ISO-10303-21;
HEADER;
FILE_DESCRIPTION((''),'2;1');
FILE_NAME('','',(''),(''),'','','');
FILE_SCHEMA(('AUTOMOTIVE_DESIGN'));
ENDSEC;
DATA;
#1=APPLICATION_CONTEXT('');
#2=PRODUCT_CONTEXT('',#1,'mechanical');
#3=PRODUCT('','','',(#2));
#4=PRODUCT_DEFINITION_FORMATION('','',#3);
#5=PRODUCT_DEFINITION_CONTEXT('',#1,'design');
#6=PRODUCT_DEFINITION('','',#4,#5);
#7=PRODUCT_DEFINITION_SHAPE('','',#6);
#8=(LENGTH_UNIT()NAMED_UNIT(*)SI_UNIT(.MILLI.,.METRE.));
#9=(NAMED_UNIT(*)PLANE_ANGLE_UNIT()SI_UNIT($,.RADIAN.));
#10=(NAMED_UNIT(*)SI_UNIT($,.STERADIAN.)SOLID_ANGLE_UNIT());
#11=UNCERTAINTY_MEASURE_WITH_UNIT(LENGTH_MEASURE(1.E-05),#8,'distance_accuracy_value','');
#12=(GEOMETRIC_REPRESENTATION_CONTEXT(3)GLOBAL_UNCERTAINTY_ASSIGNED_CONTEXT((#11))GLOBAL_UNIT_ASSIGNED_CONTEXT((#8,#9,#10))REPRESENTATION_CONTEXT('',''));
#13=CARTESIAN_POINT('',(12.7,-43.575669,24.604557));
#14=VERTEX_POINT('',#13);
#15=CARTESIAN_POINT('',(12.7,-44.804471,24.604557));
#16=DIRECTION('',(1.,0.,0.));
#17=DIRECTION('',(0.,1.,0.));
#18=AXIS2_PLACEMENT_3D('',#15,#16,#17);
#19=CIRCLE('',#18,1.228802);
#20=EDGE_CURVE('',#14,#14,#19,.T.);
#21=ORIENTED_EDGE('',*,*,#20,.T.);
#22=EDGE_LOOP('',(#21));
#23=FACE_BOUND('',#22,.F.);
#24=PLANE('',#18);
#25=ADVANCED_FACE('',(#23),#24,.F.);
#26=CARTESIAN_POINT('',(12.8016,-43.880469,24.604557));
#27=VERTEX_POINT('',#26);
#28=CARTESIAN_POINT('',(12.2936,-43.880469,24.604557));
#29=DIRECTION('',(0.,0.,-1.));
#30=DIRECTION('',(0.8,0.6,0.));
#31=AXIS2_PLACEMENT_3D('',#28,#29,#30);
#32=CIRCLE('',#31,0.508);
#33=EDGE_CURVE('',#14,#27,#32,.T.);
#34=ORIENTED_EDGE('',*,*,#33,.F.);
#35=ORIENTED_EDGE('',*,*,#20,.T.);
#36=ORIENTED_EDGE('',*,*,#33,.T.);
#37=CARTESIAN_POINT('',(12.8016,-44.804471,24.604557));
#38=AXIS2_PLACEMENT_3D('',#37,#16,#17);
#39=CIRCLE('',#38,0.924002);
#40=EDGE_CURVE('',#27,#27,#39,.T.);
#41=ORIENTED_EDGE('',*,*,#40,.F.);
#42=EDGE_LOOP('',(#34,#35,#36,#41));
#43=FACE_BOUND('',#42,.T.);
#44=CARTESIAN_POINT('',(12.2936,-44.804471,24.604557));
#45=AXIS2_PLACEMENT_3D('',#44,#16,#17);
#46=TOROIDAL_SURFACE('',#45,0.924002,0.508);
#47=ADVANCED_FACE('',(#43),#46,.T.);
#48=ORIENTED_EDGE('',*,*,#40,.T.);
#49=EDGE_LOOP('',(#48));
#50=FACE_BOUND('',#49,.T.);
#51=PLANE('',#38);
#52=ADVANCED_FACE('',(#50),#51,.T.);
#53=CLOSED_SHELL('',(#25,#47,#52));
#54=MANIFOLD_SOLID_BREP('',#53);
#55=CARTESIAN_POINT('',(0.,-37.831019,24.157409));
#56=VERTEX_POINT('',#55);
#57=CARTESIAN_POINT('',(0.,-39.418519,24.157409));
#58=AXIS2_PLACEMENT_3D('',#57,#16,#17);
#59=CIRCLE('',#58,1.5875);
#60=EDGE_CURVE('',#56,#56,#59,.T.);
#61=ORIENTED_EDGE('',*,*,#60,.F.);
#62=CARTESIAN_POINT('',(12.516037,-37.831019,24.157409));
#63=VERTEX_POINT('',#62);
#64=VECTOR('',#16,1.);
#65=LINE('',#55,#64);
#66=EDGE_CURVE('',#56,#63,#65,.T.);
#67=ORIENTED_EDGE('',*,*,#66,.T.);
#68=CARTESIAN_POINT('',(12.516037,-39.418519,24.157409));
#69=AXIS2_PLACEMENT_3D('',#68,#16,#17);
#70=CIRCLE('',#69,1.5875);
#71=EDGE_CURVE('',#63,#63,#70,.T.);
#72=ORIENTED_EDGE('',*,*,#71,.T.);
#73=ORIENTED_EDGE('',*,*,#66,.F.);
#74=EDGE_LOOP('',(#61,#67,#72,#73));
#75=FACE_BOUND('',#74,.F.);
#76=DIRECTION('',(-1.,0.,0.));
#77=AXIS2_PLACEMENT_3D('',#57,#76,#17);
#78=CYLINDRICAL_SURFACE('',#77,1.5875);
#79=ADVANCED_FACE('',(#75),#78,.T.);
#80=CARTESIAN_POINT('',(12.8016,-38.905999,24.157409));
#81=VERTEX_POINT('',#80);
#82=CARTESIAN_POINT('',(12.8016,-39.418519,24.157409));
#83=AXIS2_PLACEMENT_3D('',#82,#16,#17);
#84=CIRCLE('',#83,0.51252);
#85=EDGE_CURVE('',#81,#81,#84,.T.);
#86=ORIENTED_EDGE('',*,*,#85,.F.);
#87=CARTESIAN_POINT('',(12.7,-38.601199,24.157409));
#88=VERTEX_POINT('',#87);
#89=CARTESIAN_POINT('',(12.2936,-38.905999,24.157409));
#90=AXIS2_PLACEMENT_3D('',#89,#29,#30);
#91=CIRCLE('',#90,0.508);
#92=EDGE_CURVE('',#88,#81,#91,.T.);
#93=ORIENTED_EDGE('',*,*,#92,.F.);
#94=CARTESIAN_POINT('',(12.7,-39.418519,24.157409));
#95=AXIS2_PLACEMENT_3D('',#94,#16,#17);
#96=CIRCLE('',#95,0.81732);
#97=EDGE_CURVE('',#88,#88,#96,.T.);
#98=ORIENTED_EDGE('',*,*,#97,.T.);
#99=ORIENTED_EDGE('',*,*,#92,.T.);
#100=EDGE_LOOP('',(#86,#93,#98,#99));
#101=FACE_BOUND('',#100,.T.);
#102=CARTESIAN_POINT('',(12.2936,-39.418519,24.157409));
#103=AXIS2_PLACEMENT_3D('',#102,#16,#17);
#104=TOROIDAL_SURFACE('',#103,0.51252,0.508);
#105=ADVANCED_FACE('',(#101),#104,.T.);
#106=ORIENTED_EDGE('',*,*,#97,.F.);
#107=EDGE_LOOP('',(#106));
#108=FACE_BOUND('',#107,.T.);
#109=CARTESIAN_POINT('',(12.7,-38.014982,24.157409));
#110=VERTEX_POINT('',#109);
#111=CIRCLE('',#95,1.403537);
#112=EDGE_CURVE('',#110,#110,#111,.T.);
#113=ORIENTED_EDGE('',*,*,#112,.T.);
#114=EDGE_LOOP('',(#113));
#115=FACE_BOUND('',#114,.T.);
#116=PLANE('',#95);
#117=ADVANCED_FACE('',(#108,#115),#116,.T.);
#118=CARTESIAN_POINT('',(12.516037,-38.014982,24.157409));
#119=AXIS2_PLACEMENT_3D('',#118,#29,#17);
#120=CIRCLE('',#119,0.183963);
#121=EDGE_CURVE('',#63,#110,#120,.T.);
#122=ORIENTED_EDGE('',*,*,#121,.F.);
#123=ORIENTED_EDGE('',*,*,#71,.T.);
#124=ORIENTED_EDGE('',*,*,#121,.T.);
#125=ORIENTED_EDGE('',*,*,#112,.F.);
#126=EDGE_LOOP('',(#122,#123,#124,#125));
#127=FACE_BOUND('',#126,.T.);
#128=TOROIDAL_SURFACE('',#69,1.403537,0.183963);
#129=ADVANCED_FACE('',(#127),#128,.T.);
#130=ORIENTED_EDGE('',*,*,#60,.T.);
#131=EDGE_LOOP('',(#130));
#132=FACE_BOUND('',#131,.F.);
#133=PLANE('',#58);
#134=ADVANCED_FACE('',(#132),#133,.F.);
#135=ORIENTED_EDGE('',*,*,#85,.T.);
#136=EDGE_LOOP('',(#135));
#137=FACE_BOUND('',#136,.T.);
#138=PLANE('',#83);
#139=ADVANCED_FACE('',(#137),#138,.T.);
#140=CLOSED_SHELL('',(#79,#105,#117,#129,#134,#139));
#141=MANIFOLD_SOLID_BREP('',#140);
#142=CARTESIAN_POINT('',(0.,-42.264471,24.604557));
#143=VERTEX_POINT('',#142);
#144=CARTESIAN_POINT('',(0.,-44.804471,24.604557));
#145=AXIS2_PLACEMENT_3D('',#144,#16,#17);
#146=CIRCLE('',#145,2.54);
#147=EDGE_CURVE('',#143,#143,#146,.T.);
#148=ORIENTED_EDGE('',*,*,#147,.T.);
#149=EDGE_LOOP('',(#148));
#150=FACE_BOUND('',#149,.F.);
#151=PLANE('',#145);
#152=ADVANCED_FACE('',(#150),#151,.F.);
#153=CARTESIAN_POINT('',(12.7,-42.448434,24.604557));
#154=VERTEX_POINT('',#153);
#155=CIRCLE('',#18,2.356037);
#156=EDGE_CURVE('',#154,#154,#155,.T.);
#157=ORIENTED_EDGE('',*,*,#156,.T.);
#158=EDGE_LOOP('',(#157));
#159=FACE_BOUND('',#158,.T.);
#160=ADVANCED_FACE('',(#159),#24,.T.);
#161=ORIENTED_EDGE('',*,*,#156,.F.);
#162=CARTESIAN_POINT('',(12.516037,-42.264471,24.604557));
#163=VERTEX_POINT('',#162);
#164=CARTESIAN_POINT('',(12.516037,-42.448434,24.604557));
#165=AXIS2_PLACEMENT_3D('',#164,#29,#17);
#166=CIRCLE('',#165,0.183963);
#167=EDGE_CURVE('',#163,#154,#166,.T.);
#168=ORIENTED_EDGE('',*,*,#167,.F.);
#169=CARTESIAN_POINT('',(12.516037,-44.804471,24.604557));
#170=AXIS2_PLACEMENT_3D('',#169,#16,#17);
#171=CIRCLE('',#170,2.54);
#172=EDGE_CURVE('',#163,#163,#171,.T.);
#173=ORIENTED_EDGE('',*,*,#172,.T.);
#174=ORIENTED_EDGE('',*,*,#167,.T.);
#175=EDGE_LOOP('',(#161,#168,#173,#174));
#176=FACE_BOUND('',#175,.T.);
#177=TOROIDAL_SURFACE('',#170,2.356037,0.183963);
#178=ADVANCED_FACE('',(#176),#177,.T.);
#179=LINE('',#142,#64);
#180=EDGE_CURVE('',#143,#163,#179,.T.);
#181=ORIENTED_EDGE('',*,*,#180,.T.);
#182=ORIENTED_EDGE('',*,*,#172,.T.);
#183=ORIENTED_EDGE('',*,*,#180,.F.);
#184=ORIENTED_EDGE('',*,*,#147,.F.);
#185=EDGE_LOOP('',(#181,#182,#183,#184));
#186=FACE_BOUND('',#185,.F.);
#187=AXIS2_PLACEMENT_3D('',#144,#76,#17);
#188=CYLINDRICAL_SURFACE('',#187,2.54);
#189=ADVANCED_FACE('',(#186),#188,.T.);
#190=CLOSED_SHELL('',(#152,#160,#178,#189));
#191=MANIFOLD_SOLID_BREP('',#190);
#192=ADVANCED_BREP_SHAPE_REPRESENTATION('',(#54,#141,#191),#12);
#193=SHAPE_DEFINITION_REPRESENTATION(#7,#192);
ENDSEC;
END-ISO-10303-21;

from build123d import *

# Parameters (mm, degrees)
F0_R     = 2.54
F1_DEPTH = 12.7
F0_R_2   = 1.5875
F2_R     = 0.1839630735
F2_2_R   = 0.1839630735
F3_R     = 1.2288024755
F4_DEPTH = 0.1016
F5_R     = 0.8173198651
F6_DEPTH = 0.1016


# Not quite as in the source:
# - a fillet or chamfer that OpenCascade refuses, or shapes differently, is made with other operations: its cross-section is extruded or revolved along the edge and cut away or added
# - a feature names something its author has since deleted; it is built from what else it names


with BuildPart() as f1:
    # F0 (on Right) → F1 (new body)
    with BuildSketch(Plane.YZ):
        with Locations((-44.8044711261, 24.6045570821)):
            Circle(F0_R)
    extrude(amount=F1_DEPTH)

    # F2
    f2_edges = [f1.edges().sort_by_distance(p)[0] for p in [
        (12.7, -47.344471, 24.604557),
    ]]
    fillet(f2_edges, radius=F2_R)


with BuildPart() as f1b:
    # F0 (on Right) → F1, piece 2 (new body)
    with BuildSketch(Plane.YZ):
        with Locations((-39.4185185432, 24.1574086249)):
            Circle(F0_R_2)
    extrude(amount=F1_DEPTH)

    # F2#2
    f2_2_edges = [f1b.edges().sort_by_distance(p)[0] for p in [
        (12.7, -41.006019, 24.157409),
    ]]
    fillet(f2_2_edges, radius=F2_2_R)

    # F5 (on face) → F6 (join)
    with BuildSketch(Plane.YZ.offset(12.7)):
        with Locations((-39.4185185432, 24.1574086249)):
            Circle(F5_R)
    extrude(amount=F6_DEPTH)

    # F7: fillet of radius 0.508 on 1 edges, made by hand

    # F7_s1 → F7_t2 (revolve, cut)
    with BuildSketch(Plane.XY.offset(24.1574086249)):
        with BuildLine():
            ThreePointArc((12.7, -38.6011986781), (12.7755311154, -38.745354973), (12.8016, -38.9059986781))
            Line((12.8016, -38.9059986781), (12.8016, -38.6011986781))
            Line((12.8016, -38.6011986781), (12.7, -38.6011986781))
        make_face()
    revolve(axis=Axis((12.8016, -39.4185185432, 24.1574086249), (1, 0, 0)), mode=Mode.SUBTRACT)


with BuildPart() as f4:
    # F3 (on face) → F4 (new body)
    with BuildSketch(Plane.YZ.offset(12.7)):
        with Locations((-44.8044711261, 24.6045570821)):
            Circle(F3_R)
    extrude(amount=F4_DEPTH)

    # F7#2: fillet of radius 0.508 on 1 edges, made by hand

    # F7_2_s1 → F7_2_t2 (revolve, cut)
    with BuildSketch(Plane.XY.offset(24.6045570821)):
        with BuildLine():
            ThreePointArc((12.7, -43.5756686507), (12.7755311154, -43.7198249455), (12.8016, -43.8804686507))
            Line((12.8016, -43.8804686507), (12.8016, -43.5756686507))
            Line((12.8016, -43.5756686507), (12.7, -43.5756686507))
        make_face()
    revolve(axis=Axis((12.8016, -44.8044711261, 24.6045570821), (1, 0, 0)), mode=Mode.SUBTRACT)


solid = Compound([f1.part, f1b.part, f4.part])
